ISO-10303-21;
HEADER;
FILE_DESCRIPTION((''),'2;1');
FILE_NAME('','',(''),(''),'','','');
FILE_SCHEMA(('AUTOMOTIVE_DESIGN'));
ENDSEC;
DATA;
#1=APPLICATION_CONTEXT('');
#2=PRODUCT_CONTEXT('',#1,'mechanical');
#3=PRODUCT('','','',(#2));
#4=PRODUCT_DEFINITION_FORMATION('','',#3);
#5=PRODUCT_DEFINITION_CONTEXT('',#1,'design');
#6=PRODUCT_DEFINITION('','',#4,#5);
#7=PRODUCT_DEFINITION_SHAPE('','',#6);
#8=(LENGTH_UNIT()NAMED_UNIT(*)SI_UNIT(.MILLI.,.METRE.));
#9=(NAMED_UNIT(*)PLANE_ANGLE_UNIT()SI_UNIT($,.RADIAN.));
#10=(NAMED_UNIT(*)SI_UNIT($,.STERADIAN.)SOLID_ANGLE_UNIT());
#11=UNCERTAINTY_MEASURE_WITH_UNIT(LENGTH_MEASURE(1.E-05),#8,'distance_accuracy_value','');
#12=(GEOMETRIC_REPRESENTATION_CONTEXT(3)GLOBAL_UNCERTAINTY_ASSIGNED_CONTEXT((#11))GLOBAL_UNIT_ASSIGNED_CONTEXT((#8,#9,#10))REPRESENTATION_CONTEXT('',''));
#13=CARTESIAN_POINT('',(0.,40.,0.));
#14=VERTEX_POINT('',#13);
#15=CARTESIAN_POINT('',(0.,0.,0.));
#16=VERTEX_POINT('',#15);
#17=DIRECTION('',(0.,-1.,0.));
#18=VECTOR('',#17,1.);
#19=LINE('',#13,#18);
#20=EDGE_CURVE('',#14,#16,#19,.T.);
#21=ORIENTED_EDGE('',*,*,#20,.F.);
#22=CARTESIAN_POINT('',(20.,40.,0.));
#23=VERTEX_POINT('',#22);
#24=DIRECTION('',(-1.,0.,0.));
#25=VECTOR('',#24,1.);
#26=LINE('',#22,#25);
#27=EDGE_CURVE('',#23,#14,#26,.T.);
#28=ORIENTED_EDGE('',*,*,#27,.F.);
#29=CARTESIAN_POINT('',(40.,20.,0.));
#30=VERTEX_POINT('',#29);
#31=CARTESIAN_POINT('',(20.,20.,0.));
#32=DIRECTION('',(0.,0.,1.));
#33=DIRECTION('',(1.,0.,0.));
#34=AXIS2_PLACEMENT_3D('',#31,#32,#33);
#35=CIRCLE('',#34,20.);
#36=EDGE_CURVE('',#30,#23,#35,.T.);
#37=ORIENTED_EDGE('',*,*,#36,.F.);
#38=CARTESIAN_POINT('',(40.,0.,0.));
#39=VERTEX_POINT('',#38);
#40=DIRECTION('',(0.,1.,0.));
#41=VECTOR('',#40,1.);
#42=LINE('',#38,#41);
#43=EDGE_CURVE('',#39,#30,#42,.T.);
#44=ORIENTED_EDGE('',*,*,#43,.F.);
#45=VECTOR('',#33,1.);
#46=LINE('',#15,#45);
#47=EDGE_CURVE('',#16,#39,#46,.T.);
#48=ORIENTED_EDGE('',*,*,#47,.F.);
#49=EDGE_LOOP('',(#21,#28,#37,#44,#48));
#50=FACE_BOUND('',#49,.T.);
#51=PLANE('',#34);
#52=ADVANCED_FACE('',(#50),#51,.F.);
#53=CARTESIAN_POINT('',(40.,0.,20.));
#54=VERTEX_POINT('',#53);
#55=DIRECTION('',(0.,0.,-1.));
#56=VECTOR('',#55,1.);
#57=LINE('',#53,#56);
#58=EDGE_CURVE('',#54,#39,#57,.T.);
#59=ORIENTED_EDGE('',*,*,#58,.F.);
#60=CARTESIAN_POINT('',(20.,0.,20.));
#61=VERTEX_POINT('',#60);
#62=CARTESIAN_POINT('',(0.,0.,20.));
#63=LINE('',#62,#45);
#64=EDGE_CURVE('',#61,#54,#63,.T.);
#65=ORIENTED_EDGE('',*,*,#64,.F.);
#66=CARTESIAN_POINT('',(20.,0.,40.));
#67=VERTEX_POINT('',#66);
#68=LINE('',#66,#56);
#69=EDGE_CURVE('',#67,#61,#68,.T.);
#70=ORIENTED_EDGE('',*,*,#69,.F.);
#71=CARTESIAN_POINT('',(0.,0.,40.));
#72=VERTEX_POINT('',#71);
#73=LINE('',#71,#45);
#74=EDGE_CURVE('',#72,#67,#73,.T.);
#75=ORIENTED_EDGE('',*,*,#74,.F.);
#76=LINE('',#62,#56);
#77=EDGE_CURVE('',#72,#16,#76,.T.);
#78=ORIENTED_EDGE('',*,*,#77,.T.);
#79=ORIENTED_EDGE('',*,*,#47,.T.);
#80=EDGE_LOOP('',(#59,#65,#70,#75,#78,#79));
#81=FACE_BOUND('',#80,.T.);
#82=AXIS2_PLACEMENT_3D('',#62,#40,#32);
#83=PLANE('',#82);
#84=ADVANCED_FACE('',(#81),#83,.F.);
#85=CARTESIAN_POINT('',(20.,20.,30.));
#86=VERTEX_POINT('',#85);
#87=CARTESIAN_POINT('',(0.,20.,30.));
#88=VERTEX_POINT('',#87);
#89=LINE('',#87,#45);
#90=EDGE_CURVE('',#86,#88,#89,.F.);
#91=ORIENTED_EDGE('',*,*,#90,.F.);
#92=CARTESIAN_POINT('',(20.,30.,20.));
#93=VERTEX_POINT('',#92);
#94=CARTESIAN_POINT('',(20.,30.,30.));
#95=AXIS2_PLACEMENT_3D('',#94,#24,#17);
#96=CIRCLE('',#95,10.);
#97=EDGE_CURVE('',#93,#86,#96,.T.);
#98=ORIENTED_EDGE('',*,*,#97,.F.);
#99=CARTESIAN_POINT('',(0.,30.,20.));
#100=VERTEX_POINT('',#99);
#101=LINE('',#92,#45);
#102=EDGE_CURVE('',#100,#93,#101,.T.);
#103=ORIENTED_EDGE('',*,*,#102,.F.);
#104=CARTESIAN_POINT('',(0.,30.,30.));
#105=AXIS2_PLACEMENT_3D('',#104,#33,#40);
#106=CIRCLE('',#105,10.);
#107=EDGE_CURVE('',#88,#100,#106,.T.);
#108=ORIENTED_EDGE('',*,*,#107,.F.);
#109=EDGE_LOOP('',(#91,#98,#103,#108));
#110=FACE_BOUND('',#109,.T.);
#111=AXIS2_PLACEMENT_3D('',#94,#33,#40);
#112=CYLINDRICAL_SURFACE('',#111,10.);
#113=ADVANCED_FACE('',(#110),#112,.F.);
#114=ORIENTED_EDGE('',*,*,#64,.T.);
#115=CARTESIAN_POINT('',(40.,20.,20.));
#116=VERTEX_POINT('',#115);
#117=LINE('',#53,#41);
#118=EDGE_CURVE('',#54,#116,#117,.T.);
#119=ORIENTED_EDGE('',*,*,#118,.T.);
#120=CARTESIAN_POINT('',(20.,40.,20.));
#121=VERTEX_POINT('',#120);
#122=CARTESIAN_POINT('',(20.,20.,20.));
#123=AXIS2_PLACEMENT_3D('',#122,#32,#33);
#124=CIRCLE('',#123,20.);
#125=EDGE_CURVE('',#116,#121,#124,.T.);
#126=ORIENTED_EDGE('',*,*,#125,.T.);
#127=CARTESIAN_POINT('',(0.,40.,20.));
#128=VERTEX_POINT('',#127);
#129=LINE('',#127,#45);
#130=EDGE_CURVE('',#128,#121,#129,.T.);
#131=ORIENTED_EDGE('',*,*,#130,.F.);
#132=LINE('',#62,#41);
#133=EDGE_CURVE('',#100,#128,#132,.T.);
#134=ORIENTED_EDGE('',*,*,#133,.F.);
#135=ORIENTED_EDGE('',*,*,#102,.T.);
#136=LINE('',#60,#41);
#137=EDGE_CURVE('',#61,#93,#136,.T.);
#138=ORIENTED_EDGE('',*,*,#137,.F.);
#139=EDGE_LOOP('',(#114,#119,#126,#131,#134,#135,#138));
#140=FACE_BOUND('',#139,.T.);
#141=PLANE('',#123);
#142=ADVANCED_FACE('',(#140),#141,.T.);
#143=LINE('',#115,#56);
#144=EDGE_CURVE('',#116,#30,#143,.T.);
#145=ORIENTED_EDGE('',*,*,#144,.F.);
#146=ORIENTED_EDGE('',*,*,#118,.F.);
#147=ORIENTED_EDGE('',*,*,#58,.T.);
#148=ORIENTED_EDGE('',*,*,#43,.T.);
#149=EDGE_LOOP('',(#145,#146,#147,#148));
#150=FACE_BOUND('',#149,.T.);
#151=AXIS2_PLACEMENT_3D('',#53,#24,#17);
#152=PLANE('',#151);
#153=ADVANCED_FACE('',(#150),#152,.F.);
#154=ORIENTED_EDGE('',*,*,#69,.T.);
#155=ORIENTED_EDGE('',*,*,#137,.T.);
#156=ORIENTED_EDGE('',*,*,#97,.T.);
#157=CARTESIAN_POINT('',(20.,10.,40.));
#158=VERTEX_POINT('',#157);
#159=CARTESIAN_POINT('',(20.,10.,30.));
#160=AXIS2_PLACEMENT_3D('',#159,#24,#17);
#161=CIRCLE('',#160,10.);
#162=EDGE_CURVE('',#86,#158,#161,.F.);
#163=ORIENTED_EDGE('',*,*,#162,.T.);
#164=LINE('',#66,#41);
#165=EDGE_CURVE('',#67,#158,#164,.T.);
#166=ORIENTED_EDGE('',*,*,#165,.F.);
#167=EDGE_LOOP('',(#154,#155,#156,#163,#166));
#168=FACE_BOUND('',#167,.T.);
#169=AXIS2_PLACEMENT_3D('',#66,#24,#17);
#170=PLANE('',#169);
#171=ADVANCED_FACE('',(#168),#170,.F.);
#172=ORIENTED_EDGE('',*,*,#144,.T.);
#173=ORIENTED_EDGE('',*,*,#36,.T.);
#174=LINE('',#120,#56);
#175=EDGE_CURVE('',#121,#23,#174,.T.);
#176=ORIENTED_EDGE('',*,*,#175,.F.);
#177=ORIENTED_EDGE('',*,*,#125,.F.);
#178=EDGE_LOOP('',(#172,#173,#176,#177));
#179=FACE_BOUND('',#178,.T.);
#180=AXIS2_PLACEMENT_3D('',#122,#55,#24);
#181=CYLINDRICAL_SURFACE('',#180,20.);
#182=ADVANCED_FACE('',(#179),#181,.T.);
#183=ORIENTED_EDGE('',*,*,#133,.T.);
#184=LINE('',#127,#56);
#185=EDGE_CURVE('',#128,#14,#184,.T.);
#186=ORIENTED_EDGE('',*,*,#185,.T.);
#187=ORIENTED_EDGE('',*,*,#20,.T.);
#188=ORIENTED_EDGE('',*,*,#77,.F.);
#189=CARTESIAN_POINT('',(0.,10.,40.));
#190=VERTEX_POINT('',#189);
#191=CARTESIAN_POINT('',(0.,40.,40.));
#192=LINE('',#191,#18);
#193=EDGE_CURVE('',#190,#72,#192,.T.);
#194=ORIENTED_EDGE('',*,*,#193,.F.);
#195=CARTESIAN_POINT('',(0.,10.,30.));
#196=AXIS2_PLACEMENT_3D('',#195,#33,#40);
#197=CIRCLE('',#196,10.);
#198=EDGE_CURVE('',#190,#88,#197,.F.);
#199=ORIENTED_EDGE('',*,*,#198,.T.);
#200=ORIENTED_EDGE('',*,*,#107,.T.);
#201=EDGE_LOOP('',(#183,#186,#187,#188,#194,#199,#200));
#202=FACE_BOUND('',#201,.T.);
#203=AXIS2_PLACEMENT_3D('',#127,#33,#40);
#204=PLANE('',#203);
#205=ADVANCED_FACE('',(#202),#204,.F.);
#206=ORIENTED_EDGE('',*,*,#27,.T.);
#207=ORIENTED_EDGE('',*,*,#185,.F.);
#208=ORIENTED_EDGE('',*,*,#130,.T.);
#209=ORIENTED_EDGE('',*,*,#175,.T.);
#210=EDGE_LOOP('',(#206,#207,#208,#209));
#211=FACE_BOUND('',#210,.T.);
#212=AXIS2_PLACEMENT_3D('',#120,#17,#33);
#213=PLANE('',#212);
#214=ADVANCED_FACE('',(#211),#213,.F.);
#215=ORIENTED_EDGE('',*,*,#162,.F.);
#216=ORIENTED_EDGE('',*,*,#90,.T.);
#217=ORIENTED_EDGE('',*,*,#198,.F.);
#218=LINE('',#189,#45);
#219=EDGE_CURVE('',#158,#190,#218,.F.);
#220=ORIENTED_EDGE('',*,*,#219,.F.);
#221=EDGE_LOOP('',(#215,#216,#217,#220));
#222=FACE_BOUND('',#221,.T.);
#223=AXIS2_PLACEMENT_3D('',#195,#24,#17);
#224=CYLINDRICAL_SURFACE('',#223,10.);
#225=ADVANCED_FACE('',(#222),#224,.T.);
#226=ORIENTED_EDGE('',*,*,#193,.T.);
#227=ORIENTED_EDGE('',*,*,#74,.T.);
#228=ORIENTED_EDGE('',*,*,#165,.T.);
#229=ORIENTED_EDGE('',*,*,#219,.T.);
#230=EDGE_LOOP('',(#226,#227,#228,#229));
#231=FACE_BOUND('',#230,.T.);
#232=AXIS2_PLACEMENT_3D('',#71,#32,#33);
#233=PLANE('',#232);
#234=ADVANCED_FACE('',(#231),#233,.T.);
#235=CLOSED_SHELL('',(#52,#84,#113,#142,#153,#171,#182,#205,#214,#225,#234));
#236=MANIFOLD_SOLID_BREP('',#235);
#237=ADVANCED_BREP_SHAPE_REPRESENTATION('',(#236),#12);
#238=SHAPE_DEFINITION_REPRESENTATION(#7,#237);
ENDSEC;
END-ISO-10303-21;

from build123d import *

# Parameters (mm, degrees)
DODANIE_WYCI_GNI_CIE1_DEPTH = 20
SZKIC2_W                    = 20
SZKIC2_H                    = 40
DODANIE_WYCI_GNI_CIE2_DEPTH = 20
WYTNIJ_WYCI_GNI_CIE1_DEPTH  = 20
ZAOKR_GLENIE1_R             = 10
ZAOKR_GLENIE2_R             = 10


with BuildPart() as part:
    # Szkic1 → Dodanie-wyciągnięcie1 (new body)
    with BuildSketch(Plane.XY):
        with BuildLine():
            Line((0, 0), (40, 0))
            Line((40, 0), (40, 20))
            ThreePointArc((40, 20), (34.142135624, 34.142135624), (20, 40))
            Line((20, 40), (0, 40))
            Line((0, 40), (0, 0))
        make_face()
    extrude(amount=DODANIE_WYCI_GNI_CIE1_DEPTH)

    # Szkic2 → Dodanie-wyciągnięcie2 (add)
    with BuildSketch(Plane.XY.offset(20)):
        with Locations((10, 20)):
            Rectangle(SZKIC2_W, SZKIC2_H)
    extrude(amount=DODANIE_WYCI_GNI_CIE2_DEPTH)

    # Szkic3 → Wytnij-wyciągnięcie1 (cut)
    with BuildSketch(Plane(origin=(20, 0, 0), x_dir=(0, 0, -1), z_dir=(1, 0, 0))):
        Polygon((-40, 20), (-30, 20), (-20, 20), (-20, 40), (-40, 40), align=None)
    extrude(amount=-WYTNIJ_WYCI_GNI_CIE1_DEPTH, mode=Mode.SUBTRACT)

    # Zaokrąglenie1
    zaokr_glenie1_edges = [part.edges().sort_by_distance(p)[0] for p in [
        (10, 20, 20),
    ]]
    fillet(zaokr_glenie1_edges, radius=ZAOKR_GLENIE1_R)

    # Zaokrąglenie2
    zaokr_glenie2_edges = [part.edges().sort_by_distance(p)[0] for p in [
        (10, 20, 40),
    ]]
    fillet(zaokr_glenie2_edges, radius=ZAOKR_GLENIE2_R - 0.0001)  # a hair under: the kernel refuses the full size


solid = part.part
